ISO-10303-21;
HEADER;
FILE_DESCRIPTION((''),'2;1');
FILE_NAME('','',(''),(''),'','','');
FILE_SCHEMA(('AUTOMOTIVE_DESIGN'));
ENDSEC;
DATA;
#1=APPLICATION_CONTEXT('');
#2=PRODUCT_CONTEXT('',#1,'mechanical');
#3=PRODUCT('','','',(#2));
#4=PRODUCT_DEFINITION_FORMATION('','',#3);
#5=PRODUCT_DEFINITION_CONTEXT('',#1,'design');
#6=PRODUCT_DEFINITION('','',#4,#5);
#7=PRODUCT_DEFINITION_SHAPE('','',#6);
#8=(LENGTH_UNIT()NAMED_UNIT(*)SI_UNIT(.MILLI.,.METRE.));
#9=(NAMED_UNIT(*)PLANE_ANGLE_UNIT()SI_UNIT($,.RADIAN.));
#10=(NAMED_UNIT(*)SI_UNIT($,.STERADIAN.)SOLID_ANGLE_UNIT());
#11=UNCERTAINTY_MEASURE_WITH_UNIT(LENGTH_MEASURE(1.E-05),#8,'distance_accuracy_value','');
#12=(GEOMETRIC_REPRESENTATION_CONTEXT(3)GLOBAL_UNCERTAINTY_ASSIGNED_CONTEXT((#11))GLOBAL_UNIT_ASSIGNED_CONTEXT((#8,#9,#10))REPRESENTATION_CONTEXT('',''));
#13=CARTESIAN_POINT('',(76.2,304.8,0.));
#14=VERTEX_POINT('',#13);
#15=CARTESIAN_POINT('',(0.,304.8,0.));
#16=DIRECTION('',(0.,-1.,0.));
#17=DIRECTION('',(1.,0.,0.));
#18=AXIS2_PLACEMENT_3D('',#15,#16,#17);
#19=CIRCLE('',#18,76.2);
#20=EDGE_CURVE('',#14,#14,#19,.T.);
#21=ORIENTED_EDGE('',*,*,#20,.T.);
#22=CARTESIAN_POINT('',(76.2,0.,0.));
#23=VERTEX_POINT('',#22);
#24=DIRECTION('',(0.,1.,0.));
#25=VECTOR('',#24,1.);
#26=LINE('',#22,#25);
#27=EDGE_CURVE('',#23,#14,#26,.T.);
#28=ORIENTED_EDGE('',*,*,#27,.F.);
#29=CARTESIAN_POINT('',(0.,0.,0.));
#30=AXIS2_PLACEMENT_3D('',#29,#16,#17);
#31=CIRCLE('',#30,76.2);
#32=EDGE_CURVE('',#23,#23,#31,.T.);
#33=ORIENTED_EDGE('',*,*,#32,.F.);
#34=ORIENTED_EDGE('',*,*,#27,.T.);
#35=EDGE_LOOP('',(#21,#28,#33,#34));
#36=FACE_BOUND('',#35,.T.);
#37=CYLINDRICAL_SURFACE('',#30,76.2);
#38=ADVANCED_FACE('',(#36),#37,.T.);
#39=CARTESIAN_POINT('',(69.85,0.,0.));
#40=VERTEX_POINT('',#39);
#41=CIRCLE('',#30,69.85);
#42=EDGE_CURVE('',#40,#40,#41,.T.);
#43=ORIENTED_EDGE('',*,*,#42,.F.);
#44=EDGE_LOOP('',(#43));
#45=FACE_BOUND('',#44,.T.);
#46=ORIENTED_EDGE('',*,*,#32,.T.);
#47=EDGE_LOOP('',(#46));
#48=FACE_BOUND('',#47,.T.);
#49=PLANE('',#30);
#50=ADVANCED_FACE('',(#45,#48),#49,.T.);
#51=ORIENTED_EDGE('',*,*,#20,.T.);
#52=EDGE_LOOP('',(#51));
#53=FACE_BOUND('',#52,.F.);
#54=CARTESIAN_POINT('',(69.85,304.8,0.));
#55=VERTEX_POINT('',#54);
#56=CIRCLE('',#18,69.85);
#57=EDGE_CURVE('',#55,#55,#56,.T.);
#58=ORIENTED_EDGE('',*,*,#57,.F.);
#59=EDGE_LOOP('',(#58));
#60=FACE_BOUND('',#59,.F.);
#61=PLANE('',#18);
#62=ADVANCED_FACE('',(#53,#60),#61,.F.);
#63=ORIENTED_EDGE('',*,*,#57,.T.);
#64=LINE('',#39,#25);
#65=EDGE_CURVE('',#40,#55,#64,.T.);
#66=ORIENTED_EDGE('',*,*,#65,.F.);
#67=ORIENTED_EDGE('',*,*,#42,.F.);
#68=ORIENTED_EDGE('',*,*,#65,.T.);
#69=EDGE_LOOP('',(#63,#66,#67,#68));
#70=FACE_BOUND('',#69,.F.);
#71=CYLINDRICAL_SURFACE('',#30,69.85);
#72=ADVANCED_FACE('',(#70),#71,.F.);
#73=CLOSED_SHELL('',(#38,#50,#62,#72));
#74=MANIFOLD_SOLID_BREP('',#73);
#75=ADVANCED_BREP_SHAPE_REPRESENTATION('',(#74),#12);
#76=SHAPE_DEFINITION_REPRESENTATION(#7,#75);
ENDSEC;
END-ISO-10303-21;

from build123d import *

# Parameters (mm, degrees)
F1_R     = 76.2
F2_DEPTH = 304.8
F3_T     = -6.35


# Not quite as in the source:
# - a variable given as a bare number and used for a length is read in inches; the dataset says mm whatever the document's units were


with BuildPart() as f2:
    # F1 (on Front) → F2 (new body)
    with BuildSketch(Plane.XZ):
        Circle(F1_R)
    extrude(amount=-F2_DEPTH)

    # F3
    f3_openings = [f2.faces().sort_by_distance(p)[0] for p in [
        (0, 0, 0),
        (0, 304.8, 0),
    ]]
    offset(amount=F3_T, openings=f3_openings)


solid = f2.part
